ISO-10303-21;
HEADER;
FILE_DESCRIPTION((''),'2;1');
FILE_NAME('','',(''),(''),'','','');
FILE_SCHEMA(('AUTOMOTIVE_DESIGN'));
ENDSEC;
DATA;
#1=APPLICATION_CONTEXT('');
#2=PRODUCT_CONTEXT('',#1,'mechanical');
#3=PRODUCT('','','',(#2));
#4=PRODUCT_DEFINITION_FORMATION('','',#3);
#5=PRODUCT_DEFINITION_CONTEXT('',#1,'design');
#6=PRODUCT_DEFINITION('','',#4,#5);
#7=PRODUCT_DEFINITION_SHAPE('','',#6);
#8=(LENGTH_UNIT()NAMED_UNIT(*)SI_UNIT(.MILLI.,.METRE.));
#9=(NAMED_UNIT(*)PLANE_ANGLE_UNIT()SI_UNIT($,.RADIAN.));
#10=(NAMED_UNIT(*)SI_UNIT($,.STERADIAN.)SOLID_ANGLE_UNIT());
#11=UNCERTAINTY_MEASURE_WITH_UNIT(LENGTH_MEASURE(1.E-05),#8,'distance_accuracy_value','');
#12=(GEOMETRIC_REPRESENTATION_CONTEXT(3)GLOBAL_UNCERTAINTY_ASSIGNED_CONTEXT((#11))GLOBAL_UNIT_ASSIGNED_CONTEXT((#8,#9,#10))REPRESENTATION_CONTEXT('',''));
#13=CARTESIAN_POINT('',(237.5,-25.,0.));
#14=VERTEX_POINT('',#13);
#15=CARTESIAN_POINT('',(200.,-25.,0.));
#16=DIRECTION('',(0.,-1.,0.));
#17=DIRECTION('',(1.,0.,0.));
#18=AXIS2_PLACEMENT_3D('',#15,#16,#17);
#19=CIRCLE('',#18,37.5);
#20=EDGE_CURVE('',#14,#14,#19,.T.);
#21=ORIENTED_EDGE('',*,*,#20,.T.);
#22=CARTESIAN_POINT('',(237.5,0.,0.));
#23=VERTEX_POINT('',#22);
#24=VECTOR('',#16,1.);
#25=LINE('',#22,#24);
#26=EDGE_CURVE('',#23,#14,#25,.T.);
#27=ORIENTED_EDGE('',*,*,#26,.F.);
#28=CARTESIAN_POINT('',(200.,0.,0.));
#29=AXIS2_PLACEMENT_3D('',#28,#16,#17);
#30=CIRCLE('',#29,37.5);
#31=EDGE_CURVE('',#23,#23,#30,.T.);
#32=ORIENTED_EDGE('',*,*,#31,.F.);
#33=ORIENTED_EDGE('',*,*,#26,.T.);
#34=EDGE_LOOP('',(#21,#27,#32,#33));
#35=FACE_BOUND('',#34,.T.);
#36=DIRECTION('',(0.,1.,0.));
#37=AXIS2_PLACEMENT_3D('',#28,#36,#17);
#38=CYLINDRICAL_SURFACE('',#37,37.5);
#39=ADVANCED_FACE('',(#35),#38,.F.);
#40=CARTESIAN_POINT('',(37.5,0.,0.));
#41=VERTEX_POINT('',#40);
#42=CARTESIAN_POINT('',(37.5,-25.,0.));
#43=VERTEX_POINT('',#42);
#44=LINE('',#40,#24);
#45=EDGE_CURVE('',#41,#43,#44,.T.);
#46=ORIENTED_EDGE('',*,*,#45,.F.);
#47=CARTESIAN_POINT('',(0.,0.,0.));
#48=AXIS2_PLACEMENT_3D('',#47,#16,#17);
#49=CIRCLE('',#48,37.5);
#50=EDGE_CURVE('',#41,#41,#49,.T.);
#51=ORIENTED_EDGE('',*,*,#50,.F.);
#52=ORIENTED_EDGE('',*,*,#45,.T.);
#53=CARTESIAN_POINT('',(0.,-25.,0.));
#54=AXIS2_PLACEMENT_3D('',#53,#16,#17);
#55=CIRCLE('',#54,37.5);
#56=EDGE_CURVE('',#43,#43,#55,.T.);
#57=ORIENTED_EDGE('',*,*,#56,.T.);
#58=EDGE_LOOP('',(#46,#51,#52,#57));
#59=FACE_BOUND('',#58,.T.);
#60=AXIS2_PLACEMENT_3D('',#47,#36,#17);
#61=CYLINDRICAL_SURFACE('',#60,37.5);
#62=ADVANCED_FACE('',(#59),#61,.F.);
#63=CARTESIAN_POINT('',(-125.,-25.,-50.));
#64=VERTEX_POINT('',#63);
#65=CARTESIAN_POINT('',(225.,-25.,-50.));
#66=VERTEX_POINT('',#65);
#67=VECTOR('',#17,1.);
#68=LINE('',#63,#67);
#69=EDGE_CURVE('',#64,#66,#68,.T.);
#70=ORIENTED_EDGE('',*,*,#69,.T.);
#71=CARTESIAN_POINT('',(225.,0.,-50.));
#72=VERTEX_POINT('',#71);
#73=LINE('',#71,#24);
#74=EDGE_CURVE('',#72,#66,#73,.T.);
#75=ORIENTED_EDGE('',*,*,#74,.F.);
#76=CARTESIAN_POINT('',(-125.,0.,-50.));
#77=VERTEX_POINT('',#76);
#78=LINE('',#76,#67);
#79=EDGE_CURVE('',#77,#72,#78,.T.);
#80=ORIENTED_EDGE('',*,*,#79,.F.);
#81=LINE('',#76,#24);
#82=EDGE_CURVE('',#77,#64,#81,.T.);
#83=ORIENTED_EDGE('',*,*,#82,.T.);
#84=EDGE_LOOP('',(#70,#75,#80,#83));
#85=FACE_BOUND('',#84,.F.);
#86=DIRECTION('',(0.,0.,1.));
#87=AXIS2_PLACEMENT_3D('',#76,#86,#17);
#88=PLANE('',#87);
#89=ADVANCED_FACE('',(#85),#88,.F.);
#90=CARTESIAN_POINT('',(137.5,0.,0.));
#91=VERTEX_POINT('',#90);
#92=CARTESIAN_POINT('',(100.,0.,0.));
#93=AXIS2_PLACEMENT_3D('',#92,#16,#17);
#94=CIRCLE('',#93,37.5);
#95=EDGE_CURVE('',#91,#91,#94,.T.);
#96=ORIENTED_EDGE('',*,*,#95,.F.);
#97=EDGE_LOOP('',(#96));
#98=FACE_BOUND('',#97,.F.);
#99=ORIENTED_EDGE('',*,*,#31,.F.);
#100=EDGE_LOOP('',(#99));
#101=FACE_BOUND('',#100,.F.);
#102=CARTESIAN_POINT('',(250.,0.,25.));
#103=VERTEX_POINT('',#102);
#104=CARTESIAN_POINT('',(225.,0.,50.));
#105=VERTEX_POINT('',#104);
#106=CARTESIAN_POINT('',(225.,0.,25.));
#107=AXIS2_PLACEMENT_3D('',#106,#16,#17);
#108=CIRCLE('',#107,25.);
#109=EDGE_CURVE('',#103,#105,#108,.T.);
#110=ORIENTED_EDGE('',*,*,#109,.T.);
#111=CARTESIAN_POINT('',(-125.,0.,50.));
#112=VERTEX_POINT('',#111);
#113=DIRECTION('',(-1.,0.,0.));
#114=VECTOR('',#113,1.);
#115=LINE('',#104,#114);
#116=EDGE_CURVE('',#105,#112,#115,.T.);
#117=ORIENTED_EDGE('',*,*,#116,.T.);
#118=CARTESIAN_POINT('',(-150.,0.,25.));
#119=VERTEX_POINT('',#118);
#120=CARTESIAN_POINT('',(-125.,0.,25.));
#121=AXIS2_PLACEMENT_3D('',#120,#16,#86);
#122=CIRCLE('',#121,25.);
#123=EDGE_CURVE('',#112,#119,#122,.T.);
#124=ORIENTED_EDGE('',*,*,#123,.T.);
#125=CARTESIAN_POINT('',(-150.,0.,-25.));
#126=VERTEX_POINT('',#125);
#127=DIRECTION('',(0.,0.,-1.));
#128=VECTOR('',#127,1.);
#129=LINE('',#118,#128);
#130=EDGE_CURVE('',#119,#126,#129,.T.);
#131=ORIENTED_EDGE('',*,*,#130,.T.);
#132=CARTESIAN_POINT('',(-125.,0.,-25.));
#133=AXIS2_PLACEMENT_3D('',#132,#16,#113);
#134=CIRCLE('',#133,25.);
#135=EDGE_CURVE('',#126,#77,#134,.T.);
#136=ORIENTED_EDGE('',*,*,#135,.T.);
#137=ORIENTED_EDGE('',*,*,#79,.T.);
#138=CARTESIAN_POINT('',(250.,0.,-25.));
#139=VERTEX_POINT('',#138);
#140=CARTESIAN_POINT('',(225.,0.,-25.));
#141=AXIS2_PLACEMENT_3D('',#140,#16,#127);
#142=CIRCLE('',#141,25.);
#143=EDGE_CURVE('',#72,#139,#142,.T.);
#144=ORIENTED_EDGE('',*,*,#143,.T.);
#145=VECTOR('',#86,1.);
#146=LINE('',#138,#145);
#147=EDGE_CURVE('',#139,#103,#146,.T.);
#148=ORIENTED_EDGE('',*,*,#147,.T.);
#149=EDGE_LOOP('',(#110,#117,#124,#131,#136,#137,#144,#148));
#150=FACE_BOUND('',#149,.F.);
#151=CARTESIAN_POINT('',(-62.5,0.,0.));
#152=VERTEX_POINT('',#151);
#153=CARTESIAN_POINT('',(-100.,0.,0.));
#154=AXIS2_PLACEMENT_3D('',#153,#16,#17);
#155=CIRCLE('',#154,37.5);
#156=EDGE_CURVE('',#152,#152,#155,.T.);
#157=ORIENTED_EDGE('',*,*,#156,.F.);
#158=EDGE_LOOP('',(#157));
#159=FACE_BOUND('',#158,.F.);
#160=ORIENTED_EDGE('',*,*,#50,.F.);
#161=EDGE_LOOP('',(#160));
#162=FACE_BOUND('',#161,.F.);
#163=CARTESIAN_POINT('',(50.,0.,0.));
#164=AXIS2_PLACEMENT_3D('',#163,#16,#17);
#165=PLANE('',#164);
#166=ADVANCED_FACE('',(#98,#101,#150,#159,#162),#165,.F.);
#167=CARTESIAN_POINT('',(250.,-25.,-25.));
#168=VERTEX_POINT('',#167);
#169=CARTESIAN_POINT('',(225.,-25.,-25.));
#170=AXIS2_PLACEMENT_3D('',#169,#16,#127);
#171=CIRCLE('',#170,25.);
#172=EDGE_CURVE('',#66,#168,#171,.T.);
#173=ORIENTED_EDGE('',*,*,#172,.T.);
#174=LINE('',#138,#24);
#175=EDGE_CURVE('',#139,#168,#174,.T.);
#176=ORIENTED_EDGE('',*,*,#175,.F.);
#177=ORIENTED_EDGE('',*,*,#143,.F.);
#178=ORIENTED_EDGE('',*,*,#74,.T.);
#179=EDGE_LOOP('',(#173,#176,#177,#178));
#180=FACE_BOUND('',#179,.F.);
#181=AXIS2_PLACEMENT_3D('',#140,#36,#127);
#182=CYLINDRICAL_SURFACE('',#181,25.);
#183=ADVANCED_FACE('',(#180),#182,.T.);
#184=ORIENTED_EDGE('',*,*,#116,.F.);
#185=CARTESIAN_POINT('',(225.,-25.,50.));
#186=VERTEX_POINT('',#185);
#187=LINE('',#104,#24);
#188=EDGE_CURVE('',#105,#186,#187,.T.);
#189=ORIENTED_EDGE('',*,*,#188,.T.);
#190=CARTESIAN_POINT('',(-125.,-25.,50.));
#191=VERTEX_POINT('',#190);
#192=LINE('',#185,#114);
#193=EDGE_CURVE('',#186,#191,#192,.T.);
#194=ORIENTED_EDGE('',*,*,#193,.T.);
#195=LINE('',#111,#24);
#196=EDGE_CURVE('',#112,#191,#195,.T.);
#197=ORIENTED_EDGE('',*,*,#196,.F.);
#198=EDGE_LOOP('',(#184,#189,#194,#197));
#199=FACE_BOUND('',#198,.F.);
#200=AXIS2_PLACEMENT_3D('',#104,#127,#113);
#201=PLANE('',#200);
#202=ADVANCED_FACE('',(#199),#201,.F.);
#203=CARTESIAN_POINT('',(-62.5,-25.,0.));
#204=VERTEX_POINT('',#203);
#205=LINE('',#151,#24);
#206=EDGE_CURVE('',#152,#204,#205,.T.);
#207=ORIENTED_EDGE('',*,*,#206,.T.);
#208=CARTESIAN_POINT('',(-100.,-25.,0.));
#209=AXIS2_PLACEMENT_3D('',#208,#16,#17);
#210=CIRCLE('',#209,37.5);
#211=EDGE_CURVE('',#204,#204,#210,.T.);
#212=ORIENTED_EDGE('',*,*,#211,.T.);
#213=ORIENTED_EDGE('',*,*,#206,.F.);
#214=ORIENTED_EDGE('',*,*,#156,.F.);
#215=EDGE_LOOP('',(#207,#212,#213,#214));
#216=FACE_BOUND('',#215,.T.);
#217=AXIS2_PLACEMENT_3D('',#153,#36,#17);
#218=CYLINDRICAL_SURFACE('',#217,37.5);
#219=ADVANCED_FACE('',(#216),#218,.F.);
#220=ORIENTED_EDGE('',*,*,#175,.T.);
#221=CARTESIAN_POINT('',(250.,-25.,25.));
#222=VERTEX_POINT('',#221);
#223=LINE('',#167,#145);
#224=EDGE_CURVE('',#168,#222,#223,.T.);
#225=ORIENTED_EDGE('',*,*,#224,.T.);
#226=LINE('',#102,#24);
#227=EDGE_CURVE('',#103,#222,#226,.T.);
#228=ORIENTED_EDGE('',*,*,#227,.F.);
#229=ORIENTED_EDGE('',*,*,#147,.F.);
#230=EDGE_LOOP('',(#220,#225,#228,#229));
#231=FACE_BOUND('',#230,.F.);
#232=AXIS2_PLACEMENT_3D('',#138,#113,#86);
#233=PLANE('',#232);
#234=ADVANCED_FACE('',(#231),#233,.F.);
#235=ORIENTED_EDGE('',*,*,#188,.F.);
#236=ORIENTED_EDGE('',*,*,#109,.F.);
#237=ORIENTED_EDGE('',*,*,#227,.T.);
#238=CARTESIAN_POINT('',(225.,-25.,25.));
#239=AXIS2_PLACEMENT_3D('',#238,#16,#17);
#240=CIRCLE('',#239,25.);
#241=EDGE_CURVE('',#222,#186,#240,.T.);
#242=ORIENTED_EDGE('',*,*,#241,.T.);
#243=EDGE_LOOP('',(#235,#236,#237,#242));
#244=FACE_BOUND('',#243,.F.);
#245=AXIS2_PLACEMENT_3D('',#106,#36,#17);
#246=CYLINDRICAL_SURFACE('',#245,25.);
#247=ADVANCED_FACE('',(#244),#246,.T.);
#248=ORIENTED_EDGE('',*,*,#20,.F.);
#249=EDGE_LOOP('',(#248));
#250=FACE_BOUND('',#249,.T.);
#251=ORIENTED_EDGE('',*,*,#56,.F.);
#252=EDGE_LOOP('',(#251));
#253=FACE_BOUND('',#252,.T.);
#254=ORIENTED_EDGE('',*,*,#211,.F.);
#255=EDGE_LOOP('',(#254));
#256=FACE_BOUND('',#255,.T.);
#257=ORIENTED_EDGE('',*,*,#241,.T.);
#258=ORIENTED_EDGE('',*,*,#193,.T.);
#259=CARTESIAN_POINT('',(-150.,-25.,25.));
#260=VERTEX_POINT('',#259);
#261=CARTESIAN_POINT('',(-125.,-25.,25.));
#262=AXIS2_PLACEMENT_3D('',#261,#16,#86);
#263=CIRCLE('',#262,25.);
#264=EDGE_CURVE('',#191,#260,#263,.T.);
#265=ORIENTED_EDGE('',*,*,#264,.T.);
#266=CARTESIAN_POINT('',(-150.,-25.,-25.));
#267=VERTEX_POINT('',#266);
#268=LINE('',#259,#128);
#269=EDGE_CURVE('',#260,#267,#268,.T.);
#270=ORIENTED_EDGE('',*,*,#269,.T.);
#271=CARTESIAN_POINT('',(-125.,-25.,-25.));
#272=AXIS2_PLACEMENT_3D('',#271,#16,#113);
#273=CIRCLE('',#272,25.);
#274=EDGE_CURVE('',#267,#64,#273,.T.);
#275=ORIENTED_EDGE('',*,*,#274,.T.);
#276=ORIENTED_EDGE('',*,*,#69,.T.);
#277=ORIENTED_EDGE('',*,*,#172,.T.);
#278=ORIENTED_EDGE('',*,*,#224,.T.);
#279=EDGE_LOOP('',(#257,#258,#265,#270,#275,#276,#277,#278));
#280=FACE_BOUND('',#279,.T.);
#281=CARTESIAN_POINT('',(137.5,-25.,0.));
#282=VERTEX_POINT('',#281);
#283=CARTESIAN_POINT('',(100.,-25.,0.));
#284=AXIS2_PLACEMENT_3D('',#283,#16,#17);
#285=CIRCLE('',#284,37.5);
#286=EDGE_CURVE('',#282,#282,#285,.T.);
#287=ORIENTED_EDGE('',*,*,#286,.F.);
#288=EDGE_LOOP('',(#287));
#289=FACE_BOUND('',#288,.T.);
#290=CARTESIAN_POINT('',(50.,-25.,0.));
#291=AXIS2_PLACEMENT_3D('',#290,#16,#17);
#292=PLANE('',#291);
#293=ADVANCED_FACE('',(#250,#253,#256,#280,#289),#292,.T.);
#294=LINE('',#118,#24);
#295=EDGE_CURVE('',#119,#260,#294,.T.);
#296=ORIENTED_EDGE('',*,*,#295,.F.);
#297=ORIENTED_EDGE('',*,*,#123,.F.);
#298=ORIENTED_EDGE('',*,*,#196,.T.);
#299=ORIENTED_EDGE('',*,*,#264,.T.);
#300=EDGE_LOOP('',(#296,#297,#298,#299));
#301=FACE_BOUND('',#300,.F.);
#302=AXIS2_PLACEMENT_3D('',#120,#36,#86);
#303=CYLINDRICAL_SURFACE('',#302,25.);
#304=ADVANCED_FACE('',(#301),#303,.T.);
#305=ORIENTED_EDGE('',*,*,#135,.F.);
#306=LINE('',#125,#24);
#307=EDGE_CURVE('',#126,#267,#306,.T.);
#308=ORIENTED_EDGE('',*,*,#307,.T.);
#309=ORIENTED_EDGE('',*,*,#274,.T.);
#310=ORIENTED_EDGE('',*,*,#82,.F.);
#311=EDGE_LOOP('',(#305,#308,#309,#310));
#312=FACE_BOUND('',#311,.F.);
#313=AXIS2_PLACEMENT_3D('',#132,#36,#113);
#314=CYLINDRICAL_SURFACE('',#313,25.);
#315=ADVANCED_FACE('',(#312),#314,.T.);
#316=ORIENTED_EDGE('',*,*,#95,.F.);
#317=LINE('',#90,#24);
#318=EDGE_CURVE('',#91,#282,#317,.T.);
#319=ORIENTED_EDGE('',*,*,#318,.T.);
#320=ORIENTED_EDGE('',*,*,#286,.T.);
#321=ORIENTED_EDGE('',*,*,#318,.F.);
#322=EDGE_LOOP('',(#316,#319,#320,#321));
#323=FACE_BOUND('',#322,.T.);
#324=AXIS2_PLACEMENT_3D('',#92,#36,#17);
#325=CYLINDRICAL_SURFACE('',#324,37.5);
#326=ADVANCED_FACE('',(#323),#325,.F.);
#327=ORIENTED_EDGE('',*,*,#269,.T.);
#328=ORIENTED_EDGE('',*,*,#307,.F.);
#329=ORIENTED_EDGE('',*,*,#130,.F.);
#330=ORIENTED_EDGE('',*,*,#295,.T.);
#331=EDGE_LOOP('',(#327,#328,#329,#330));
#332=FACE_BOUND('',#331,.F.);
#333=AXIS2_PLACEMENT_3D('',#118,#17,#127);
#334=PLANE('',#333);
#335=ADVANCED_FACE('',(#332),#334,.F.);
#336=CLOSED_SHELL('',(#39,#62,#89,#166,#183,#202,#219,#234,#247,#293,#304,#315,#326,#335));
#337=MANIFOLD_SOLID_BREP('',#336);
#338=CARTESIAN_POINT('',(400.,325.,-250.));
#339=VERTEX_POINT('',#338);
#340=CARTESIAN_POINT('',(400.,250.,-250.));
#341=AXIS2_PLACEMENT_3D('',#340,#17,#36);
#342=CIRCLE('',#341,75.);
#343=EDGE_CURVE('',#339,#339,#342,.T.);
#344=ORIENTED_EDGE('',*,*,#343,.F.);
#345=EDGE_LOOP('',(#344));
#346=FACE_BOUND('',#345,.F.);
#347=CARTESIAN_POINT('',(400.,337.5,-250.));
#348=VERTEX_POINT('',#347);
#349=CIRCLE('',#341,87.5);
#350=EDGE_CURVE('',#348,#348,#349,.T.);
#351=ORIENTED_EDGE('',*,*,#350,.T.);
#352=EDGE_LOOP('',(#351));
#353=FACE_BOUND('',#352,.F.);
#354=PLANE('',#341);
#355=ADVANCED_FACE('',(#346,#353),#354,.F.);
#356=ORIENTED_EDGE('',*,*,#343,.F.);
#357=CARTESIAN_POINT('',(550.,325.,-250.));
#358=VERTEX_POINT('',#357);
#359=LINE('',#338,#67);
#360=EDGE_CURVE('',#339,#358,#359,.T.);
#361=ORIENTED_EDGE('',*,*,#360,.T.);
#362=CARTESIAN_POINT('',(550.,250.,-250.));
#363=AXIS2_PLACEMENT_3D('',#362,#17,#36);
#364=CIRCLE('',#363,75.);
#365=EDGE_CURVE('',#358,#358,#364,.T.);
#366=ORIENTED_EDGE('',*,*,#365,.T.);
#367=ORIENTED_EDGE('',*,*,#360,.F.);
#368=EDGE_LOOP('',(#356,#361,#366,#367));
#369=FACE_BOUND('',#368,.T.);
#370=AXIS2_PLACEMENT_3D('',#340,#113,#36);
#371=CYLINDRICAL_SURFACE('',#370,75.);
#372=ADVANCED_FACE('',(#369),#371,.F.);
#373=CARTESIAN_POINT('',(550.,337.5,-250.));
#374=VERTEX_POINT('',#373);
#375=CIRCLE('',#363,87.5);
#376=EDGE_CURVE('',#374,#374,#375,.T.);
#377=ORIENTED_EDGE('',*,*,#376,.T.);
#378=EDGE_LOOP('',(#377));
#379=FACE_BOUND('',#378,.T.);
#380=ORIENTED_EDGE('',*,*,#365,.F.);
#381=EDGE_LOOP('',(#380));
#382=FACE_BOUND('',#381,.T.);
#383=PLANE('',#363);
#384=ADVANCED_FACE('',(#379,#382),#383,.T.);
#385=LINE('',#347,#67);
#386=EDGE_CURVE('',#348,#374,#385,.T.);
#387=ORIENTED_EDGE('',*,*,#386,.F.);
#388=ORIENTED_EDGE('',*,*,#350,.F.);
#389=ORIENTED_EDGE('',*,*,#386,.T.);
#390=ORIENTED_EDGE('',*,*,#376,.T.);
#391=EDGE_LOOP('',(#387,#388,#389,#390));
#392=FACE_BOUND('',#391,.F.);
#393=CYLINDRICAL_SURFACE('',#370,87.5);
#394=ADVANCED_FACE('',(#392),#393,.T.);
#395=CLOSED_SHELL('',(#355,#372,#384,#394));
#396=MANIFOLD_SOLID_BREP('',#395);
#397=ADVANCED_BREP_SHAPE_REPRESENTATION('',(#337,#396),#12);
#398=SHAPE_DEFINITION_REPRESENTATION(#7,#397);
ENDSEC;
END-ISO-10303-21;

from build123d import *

# Parameters (mm, degrees)
F0_R     = 37.5
F1_DEPTH = 25
F3_R     = 87.5
F3_R_2   = 75
F4_DEPTH = 150


# Not quite as in the source:
# - the program builds the solid bodies; features that only make, move or delete a surface that nothing else refers to are left out


with BuildPart() as f1:
    # F0 (on Front) → F1 (new body)
    with BuildSketch(Plane.XZ):
        with BuildLine():
            ThreePointArc((250, 25), (242.6776695297, 42.6776695297), (225, 50))
            Line((225, 50), (-125, 50))
            ThreePointArc((-125, 50), (-142.6776695297, 42.6776695297), (-150, 25))
            Line((-150, 25), (-150, -25))
            ThreePointArc((-150, -25), (-142.6776695297, -42.6776695297), (-125, -50))
            Line((-125, -50), (225, -50))
            ThreePointArc((225, -50), (242.6776695297, -42.6776695297), (250, -25))
            Line((250, -25), (250, 25))
        make_face()
        with Locations((-100, 0)):
            Circle(F0_R, mode=Mode.SUBTRACT)
        Circle(F0_R, mode=Mode.SUBTRACT)
        with Locations((100, 0)):
            Circle(F0_R, mode=Mode.SUBTRACT)
        with Locations((200, 0)):
            Circle(F0_R, mode=Mode.SUBTRACT)
    extrude(amount=F1_DEPTH)


with BuildPart() as f4:
    # F3 (on offset) → F4 (new body)
    with BuildSketch(Plane.YZ.offset(400)):
        with Locations((250, -250)):
            Circle(F3_R)
        with Locations((250, -250)):
            Circle(F3_R_2, mode=Mode.SUBTRACT)
    extrude(amount=F4_DEPTH)


solid = Compound([f1.part, f4.part])
